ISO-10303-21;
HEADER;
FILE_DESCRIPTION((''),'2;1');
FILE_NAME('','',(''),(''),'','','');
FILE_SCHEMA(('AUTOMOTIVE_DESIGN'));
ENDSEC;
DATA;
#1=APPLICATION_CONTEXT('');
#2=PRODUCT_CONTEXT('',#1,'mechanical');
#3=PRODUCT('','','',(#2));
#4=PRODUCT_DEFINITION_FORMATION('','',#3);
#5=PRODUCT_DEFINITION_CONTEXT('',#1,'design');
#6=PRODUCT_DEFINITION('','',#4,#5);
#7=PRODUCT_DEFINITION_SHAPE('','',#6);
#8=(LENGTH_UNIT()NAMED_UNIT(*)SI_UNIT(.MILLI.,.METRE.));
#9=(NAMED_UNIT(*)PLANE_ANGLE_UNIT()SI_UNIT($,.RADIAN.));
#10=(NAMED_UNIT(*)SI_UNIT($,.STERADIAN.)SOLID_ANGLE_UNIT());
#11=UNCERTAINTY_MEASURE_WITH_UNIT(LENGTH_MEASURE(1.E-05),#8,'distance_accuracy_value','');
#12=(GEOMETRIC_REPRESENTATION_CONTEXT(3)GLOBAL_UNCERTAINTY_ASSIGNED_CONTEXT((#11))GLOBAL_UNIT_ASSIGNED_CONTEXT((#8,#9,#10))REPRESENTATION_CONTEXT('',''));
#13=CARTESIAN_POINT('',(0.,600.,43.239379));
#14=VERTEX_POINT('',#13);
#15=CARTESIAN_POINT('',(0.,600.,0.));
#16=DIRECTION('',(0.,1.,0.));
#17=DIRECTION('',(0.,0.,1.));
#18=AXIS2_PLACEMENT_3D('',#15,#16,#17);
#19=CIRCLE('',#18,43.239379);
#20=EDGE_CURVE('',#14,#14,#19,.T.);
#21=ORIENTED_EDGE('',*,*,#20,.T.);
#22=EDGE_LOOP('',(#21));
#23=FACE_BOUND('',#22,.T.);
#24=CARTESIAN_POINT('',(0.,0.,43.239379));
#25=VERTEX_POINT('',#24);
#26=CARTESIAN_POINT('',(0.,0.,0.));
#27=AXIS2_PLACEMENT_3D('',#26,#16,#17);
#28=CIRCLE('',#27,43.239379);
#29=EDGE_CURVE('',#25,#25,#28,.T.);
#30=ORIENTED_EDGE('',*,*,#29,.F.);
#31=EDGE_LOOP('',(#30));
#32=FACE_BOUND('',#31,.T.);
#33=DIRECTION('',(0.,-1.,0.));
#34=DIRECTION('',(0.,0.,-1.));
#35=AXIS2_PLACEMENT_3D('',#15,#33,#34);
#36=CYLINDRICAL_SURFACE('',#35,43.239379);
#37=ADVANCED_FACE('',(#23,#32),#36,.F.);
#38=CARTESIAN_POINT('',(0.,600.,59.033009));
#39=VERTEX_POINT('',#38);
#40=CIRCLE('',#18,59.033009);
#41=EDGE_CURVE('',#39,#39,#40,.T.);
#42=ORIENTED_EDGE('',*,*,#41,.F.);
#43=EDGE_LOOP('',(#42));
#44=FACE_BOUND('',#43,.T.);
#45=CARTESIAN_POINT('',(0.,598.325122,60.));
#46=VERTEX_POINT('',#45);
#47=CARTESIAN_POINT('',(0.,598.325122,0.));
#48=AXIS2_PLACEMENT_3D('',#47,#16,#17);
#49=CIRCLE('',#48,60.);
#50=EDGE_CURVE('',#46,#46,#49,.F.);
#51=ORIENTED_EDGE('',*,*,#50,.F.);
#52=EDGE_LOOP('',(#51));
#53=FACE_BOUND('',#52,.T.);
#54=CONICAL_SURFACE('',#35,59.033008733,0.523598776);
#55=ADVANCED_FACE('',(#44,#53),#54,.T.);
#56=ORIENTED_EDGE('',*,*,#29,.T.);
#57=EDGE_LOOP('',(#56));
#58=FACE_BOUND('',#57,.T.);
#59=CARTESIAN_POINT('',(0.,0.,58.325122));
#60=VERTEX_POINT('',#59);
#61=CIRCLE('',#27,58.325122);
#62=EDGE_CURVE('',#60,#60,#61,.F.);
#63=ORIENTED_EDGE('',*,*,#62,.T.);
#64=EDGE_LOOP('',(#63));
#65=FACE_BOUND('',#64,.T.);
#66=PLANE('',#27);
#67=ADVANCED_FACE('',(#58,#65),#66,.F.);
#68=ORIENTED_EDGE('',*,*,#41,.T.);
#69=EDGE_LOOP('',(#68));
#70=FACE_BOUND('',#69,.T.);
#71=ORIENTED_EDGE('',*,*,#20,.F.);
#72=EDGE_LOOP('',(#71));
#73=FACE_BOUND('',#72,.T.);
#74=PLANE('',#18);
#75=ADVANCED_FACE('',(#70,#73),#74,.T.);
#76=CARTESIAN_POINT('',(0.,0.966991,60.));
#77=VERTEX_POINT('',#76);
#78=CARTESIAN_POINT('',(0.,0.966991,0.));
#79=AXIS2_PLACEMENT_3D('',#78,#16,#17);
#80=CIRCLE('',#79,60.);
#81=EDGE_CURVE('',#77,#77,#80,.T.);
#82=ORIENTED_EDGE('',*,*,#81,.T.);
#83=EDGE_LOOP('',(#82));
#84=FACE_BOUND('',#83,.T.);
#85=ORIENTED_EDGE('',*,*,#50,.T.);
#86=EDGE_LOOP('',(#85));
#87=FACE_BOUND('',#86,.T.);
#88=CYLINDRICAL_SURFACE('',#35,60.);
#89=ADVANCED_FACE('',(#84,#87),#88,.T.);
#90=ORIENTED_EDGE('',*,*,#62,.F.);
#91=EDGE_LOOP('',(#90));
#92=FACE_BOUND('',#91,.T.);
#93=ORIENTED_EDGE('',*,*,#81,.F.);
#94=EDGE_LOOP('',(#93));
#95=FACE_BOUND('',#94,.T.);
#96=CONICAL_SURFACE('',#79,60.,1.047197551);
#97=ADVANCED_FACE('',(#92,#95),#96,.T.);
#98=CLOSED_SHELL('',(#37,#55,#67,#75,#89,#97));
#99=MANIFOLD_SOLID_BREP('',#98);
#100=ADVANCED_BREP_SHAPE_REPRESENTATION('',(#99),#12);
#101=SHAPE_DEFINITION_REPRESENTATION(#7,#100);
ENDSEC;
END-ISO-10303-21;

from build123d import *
from OCP.BRepFilletAPI import BRepFilletAPI_MakeChamfer

# Parameters (mm, degrees)
SKETCH1_R           = 60
BOSS_EXTRUDE1_DEPTH = 600
SKETCH2_R           = 43.239378985
CUT_EXTRUDE1_DEPTH  = 606.970296302
CHAMFER1_SIZE       = 1.674878005
CHAMFER1_SIZE2      = 0.966991267


with BuildPart() as part:
    # Sketch1 → Boss-Extrude1 (new body)
    with BuildSketch(Plane(origin=(0, 0, 0), x_dir=(1, 0, 0), z_dir=(0, 1, 0))):
        Circle(SKETCH1_R)
    extrude(amount=BOSS_EXTRUDE1_DEPTH)

    # Sketch2 → Cut-Extrude1 (cut, through all)
    with BuildSketch(Plane(origin=(0, 0, 0), x_dir=(1, 0, 0), z_dir=(0, 1, 0))):
        Circle(SKETCH2_R)
    extrude(amount=CUT_EXTRUDE1_DEPTH, mode=Mode.SUBTRACT)

    # Chamfer1: one chamfer whose edges measure the first distance from different faces: ONE call of the kernel's chamfer builder (chamfer() names one face for all edges)
    chamfer1_edges_1 = [part.edges().sort_by_distance(p)[0] for p in [
        (-60, 600, 0),
    ]]
    chamfer1_side_1 = [part.faces().sort_by_distance(p)[0] for p in [
        (-60, 300, 0),
    ]]
    chamfer1_edges_2 = [part.edges().sort_by_distance(p)[0] for p in [
        (-60, 0, 0),
    ]]
    chamfer1_side_2 = [part.faces().sort_by_distance(p)[0] for p in [
        (-58.302943725, 0, 0),
    ]]
    chamfer1 = BRepFilletAPI_MakeChamfer(part.part.solid().wrapped)
    for e in chamfer1_edges_1:
        chamfer1.Add(CHAMFER1_SIZE, CHAMFER1_SIZE2, e.wrapped, chamfer1_side_1[0].wrapped)  # the first distance lies on this face
    for e in chamfer1_edges_2:
        chamfer1.Add(CHAMFER1_SIZE, CHAMFER1_SIZE2, e.wrapped, chamfer1_side_2[0].wrapped)  # the first distance lies on this face
    add(Compound.cast(chamfer1.Shape()), mode=Mode.REPLACE)


solid = part.part
